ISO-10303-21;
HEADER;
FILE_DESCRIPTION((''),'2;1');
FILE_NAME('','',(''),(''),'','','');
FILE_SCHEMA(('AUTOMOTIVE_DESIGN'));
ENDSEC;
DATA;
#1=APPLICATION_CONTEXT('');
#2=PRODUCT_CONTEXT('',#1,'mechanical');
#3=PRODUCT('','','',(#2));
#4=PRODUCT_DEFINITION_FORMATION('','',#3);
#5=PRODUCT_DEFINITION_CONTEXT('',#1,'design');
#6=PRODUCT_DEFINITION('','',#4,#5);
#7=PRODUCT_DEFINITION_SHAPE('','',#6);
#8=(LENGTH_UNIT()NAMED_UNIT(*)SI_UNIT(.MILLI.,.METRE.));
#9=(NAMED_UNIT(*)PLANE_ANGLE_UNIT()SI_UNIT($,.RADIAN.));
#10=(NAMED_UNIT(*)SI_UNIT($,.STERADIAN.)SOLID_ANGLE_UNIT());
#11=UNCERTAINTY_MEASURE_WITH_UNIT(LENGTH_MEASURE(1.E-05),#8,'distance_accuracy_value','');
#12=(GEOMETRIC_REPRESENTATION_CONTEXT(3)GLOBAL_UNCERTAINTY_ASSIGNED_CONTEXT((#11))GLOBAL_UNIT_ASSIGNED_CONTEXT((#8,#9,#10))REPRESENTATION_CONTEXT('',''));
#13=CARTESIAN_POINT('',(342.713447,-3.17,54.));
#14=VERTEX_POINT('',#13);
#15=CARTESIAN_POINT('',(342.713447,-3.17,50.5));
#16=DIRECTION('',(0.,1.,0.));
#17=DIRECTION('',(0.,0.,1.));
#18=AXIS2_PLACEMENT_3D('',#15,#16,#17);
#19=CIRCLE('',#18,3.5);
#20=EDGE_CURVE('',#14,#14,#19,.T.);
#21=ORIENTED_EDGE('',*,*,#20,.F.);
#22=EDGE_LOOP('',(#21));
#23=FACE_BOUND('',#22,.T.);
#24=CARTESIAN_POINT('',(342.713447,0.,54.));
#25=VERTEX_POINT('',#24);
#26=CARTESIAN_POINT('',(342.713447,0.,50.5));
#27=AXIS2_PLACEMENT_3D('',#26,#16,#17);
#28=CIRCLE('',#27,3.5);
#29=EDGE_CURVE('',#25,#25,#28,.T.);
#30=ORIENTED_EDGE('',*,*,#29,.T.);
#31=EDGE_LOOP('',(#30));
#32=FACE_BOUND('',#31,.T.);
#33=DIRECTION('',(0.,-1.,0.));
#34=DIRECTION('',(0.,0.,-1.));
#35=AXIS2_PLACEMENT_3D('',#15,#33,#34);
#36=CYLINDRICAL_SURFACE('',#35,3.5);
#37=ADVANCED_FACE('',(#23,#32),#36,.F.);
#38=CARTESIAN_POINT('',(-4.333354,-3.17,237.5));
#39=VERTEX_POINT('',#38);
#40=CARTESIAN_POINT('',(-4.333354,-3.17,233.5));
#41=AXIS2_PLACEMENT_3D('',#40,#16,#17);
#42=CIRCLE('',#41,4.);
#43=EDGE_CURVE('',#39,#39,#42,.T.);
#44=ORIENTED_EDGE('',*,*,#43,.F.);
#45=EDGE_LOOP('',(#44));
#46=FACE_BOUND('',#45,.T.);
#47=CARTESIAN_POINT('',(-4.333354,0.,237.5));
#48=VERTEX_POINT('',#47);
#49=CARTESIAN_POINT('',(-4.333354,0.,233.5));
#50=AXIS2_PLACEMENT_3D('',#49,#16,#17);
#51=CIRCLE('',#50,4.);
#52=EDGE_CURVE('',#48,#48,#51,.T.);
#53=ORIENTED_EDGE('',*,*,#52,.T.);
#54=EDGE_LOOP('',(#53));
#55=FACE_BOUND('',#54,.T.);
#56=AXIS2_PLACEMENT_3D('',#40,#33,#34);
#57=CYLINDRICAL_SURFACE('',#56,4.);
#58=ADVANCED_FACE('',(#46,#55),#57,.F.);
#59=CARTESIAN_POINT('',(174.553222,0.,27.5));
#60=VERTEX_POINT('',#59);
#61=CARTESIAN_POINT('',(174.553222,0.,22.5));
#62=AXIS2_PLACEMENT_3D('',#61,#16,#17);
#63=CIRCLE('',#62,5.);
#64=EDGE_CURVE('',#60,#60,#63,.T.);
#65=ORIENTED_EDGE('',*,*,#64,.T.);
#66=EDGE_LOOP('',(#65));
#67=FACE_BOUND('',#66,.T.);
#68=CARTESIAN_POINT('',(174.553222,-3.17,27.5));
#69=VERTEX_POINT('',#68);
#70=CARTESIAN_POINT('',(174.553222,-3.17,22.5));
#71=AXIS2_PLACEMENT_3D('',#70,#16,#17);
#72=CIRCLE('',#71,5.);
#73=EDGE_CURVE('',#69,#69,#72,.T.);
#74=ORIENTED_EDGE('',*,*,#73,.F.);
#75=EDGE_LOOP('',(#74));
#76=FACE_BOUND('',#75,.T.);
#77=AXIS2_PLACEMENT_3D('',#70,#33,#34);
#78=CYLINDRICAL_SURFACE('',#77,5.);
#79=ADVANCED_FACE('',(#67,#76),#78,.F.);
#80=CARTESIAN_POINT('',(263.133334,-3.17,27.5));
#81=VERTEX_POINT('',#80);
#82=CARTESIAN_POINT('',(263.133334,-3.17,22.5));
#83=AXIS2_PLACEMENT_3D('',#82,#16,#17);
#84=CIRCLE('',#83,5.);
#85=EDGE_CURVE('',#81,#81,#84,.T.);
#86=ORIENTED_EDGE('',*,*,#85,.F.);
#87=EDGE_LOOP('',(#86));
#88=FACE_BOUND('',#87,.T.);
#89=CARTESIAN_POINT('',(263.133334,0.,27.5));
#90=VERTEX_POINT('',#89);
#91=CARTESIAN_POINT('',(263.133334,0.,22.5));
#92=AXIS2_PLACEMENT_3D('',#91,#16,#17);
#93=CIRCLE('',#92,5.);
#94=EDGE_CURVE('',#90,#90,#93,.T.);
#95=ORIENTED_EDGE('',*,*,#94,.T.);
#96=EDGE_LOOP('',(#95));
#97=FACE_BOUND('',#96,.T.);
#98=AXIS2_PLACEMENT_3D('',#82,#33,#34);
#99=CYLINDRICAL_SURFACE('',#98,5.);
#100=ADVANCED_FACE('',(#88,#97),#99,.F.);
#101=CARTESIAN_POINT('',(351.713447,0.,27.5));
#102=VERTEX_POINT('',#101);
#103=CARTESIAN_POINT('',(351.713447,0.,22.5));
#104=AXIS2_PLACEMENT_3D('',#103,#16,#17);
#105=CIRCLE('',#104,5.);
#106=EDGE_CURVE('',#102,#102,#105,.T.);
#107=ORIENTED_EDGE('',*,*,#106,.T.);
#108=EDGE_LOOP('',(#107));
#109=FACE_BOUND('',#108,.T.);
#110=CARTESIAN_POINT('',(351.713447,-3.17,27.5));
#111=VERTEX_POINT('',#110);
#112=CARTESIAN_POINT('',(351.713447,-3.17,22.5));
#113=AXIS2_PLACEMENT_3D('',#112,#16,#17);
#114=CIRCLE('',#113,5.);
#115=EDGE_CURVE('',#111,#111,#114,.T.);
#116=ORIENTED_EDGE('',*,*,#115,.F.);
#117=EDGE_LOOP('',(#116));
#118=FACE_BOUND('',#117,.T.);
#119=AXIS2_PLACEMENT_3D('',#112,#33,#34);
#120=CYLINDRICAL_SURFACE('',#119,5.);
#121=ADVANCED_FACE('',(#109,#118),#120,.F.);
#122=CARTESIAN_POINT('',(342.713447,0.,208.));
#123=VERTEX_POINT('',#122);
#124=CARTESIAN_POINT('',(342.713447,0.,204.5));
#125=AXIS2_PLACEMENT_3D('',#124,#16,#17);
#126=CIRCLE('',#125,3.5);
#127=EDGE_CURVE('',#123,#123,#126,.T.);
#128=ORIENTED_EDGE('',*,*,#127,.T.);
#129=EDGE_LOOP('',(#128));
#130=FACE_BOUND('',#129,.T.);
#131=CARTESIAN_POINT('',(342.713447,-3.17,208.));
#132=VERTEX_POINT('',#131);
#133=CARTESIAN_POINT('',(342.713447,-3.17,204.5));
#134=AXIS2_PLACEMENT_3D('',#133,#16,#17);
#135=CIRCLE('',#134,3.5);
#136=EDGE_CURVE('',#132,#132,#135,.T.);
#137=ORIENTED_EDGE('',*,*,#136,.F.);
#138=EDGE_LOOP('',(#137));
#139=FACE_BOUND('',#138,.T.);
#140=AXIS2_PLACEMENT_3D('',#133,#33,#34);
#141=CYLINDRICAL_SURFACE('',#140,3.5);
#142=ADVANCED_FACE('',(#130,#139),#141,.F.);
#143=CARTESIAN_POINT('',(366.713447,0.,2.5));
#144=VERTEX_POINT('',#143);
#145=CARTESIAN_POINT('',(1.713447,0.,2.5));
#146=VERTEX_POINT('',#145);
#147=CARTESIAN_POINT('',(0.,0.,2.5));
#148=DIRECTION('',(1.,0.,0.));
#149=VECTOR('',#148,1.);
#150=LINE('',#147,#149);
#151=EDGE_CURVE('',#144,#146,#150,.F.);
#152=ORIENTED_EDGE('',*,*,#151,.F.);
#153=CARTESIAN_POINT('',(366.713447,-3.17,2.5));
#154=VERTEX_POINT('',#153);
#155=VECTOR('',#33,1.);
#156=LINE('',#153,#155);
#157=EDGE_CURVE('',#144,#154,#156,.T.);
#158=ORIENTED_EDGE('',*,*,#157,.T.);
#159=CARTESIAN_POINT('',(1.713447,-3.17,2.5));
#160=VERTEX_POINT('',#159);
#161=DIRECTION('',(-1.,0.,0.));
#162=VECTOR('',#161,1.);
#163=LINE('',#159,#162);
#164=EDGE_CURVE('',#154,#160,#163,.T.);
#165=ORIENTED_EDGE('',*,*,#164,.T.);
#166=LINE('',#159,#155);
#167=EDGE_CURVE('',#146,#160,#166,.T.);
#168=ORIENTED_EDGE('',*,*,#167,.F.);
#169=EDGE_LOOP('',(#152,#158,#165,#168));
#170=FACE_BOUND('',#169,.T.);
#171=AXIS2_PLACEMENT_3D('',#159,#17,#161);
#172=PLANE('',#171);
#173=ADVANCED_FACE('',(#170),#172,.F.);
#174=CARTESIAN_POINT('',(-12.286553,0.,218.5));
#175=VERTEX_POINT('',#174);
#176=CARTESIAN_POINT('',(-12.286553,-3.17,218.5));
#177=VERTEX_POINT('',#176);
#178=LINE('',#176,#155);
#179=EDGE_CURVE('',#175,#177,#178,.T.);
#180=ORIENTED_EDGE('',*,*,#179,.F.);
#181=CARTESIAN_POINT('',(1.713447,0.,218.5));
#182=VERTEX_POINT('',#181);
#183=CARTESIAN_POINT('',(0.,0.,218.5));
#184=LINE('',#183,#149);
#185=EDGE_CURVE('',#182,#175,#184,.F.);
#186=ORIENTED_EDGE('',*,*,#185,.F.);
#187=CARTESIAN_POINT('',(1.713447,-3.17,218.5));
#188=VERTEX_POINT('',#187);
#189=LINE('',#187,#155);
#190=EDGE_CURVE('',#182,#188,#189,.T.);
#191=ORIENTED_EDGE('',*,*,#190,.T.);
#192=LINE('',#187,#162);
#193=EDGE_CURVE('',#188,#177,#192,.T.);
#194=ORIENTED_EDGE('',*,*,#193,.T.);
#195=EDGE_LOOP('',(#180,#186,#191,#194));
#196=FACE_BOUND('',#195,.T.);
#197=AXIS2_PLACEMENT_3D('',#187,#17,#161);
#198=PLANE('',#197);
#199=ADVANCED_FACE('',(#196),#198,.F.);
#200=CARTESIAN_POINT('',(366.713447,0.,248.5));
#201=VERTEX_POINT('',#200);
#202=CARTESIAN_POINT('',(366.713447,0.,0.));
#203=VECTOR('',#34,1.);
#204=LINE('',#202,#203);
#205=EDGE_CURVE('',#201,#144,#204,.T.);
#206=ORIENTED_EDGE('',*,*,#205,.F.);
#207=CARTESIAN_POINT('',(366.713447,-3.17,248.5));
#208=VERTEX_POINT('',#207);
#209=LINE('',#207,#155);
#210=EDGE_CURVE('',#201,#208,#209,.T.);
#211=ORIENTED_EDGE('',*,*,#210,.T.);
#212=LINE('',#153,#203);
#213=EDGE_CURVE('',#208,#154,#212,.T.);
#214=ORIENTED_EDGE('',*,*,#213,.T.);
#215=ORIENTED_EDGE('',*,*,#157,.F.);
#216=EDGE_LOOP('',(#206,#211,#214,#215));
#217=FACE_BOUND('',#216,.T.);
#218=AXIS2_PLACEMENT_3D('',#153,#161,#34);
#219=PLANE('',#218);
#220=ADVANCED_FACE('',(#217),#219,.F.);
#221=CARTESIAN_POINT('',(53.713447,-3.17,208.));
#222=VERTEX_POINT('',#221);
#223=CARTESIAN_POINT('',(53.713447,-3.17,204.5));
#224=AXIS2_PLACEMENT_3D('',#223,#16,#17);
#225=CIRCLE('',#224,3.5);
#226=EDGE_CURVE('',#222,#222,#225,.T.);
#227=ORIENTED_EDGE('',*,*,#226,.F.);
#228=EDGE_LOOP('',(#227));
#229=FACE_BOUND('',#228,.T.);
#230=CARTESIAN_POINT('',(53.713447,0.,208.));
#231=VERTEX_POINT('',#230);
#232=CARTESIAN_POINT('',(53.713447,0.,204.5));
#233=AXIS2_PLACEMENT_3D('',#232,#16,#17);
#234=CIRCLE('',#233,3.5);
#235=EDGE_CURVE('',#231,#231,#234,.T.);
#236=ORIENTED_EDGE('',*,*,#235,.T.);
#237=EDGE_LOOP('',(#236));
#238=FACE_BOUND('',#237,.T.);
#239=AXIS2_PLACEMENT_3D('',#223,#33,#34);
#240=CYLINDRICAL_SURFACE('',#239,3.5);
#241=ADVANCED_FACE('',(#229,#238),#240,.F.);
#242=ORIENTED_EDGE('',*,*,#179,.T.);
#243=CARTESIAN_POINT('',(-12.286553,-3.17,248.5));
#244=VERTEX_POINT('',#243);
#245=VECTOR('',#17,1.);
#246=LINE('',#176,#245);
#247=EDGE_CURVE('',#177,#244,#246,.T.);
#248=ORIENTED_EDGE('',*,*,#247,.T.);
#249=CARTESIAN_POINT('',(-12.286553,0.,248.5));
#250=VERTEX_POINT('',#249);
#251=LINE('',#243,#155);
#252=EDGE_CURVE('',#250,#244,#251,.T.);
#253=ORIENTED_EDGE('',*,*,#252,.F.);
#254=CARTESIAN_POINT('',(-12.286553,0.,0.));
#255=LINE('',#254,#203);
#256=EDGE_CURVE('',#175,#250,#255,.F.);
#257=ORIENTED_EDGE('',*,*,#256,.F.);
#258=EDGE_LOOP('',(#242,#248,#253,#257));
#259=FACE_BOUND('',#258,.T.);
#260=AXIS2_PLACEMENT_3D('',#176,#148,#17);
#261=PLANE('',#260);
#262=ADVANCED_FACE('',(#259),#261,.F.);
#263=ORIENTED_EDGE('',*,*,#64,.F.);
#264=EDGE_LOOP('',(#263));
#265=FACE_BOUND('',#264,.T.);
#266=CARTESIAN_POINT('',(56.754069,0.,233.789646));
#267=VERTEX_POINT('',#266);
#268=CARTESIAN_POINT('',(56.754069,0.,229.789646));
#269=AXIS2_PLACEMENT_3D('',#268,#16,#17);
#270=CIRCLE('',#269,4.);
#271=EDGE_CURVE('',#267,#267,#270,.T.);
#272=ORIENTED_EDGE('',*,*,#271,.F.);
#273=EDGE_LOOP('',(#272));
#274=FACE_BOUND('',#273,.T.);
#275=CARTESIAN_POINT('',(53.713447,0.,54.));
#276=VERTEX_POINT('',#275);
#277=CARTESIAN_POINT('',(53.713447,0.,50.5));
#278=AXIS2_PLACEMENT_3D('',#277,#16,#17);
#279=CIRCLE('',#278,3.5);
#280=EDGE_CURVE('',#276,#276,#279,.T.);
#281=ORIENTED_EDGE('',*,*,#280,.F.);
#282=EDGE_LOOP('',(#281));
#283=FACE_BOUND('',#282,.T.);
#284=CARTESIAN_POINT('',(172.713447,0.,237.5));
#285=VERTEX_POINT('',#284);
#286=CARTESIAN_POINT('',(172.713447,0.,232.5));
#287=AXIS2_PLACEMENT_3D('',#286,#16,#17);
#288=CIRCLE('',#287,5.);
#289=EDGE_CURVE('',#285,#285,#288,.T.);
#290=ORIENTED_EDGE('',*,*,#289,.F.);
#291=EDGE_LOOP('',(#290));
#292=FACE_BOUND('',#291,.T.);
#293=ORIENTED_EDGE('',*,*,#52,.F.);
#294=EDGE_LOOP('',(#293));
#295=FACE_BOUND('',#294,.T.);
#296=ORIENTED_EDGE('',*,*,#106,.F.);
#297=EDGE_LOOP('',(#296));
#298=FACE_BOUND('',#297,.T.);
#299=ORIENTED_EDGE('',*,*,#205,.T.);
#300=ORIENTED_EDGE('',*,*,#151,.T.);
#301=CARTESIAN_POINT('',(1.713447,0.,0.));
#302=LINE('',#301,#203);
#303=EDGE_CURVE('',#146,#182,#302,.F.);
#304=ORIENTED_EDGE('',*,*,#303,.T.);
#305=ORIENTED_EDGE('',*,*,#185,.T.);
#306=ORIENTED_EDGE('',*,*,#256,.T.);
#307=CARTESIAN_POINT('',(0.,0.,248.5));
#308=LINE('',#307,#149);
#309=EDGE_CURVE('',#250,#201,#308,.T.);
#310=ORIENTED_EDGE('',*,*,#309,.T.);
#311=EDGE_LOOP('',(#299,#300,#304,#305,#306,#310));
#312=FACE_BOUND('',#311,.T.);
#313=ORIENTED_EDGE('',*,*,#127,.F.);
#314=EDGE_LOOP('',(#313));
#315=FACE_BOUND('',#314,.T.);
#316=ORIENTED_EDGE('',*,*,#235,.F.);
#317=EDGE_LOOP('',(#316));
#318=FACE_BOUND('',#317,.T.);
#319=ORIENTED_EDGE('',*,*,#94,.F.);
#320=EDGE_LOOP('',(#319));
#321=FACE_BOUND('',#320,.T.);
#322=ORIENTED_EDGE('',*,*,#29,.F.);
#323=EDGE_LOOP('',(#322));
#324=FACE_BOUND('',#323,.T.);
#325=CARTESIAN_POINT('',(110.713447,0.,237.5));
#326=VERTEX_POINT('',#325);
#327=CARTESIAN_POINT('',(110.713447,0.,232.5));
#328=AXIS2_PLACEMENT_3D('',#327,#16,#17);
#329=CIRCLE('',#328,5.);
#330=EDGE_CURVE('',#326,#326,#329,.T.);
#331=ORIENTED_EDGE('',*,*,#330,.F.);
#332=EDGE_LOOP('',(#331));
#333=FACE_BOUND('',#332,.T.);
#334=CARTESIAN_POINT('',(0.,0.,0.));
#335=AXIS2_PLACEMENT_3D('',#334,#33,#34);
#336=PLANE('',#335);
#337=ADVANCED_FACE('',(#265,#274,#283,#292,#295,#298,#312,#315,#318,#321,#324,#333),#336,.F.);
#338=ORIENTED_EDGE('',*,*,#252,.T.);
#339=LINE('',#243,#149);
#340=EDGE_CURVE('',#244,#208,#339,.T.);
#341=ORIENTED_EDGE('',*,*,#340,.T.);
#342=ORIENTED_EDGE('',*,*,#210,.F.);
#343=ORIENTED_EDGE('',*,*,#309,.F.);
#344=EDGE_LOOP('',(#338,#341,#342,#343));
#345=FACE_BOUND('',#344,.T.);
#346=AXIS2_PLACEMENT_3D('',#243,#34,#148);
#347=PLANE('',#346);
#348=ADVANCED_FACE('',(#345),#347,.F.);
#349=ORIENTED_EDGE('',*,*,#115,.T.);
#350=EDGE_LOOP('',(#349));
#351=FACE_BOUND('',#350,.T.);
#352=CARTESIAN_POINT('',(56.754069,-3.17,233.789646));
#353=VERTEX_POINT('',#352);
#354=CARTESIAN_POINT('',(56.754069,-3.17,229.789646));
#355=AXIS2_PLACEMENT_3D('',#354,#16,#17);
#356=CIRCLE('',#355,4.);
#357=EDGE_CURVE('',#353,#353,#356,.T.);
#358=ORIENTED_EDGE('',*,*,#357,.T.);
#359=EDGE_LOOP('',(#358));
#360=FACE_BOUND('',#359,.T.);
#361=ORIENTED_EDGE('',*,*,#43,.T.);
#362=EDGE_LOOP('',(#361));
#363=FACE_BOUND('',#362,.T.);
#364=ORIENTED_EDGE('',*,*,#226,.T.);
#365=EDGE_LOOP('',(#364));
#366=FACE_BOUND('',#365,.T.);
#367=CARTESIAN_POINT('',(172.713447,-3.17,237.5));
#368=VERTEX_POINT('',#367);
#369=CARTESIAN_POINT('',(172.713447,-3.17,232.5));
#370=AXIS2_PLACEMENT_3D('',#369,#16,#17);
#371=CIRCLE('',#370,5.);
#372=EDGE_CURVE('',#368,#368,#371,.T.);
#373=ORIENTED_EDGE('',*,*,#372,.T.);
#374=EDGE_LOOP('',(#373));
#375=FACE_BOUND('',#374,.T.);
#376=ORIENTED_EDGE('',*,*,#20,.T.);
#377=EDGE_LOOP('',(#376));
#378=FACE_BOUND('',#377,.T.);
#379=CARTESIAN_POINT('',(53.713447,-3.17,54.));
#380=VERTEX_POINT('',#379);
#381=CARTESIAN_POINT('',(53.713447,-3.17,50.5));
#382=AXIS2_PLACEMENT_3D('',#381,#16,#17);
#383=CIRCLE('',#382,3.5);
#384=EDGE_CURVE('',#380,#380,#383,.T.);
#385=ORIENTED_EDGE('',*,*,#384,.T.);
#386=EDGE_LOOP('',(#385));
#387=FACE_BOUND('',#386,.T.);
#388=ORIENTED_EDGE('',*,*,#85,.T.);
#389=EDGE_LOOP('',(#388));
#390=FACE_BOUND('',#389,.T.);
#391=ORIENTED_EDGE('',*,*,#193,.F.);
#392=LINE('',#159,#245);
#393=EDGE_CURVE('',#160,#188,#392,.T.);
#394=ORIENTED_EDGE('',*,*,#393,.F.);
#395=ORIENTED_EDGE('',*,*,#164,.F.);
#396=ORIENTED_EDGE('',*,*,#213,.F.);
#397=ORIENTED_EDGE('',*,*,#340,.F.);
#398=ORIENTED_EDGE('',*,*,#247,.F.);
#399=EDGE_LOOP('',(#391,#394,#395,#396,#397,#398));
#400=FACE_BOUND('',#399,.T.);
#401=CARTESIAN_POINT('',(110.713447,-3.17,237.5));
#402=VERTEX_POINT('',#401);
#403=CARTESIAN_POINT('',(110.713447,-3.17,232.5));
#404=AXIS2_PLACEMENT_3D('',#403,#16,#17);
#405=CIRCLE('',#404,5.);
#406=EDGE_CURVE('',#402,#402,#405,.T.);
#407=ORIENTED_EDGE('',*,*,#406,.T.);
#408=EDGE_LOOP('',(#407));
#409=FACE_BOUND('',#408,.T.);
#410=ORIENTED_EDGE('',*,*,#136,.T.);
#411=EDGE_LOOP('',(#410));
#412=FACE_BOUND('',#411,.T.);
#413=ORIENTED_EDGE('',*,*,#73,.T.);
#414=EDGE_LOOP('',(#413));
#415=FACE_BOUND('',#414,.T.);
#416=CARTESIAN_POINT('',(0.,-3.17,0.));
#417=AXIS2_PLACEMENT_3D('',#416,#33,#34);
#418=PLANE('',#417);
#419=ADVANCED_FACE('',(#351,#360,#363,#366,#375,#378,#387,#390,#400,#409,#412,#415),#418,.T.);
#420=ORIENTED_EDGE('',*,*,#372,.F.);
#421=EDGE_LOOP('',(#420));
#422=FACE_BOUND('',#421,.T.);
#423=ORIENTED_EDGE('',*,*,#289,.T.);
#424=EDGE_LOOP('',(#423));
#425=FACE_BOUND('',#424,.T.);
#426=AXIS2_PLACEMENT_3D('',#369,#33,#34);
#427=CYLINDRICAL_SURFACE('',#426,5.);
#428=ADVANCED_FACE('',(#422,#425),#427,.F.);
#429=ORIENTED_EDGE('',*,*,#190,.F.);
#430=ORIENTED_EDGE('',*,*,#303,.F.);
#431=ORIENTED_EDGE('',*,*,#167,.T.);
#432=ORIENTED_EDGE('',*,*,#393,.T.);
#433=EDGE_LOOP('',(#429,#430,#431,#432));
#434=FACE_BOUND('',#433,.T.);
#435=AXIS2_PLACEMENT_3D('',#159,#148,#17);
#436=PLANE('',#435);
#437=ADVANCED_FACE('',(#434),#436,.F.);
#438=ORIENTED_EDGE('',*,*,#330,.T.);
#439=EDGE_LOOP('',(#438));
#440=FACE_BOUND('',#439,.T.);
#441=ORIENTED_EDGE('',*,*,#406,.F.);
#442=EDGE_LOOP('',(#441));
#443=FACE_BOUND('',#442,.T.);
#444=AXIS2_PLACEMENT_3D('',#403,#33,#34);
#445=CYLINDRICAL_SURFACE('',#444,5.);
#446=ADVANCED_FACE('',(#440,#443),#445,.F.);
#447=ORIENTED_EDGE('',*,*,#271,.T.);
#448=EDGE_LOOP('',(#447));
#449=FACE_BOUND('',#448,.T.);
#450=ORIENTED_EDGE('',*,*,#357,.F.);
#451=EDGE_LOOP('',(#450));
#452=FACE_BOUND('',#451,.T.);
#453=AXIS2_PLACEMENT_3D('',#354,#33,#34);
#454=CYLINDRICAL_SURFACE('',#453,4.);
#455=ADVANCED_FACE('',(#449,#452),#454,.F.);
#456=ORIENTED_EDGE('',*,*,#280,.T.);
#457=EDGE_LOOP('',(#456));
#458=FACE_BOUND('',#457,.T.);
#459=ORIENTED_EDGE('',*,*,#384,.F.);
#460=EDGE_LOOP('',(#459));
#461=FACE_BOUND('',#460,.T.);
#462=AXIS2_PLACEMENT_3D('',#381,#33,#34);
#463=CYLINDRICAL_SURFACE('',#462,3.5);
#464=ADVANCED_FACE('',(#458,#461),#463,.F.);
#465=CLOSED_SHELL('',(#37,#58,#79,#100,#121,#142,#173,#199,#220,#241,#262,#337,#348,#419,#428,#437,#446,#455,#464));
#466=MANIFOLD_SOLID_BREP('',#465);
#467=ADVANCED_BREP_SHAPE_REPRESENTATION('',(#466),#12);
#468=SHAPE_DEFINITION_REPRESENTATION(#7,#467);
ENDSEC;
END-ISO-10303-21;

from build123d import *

# Parameters (mm, degrees)
SKETCH1_R           = 4
SKETCH1_R_2         = 3.5
SKETCH1_R_3         = 5
BOSS_EXTRUDE1_DEPTH = 3.17


with BuildPart() as part:
    # Sketch1 → Boss-Extrude1 (new body)
    with BuildSketch(Plane(origin=(0, 0, 0), x_dir=(1, 0, 0), z_dir=(0, 1, 0))):
        Polygon((1.713446604, -2.5), (366.713446604, -2.5), (366.713446604, -248.5), (-12.286553396, -248.5), (-12.286553396, -218.5), (1.713446604, -218.5), align=None)
        with Locations(Location((-4.333354101, -233.5, 0), (0, 0, 270))):
            Circle(SKETCH1_R, mode=Mode.SUBTRACT)
        with Locations(Location((56.754069102, -229.789646053, 0), (0, 0, 270))):
            Circle(SKETCH1_R, mode=Mode.SUBTRACT)
        with Locations(Location((53.713446604, -50.5, 0), (0, 0, 270))):
            Circle(SKETCH1_R_2, mode=Mode.SUBTRACT)
        with Locations(Location((53.713446604, -204.5, 0), (0, 0, 270))):
            Circle(SKETCH1_R_2, mode=Mode.SUBTRACT)
        with Locations(Location((342.713446604, -204.5, 0), (0, 0, 270))):
            Circle(SKETCH1_R_2, mode=Mode.SUBTRACT)
        with Locations(Location((342.713446604, -50.5, 0), (0, 0, 270))):
            Circle(SKETCH1_R_2, mode=Mode.SUBTRACT)
        with Locations(Location((263.133334245, -22.5, 0), (0, 0, 270))):
            Circle(SKETCH1_R_3, mode=Mode.SUBTRACT)
        with Locations(Location((172.713446604, -232.5, 0), (0, 0, 270))):
            Circle(SKETCH1_R_3, mode=Mode.SUBTRACT)
        with Locations(Location((110.713446604, -232.5, 0), (0, 0, 270))):
            Circle(SKETCH1_R_3, mode=Mode.SUBTRACT)
        with Locations(Location((174.553221886, -22.5, 0), (0, 0, 270))):
            Circle(SKETCH1_R_3, mode=Mode.SUBTRACT)
        with Locations(Location((351.713446604, -22.5, 0), (0, 0, 270))):
            Circle(SKETCH1_R_3, mode=Mode.SUBTRACT)
    extrude(amount=-BOSS_EXTRUDE1_DEPTH)


solid = part.part
